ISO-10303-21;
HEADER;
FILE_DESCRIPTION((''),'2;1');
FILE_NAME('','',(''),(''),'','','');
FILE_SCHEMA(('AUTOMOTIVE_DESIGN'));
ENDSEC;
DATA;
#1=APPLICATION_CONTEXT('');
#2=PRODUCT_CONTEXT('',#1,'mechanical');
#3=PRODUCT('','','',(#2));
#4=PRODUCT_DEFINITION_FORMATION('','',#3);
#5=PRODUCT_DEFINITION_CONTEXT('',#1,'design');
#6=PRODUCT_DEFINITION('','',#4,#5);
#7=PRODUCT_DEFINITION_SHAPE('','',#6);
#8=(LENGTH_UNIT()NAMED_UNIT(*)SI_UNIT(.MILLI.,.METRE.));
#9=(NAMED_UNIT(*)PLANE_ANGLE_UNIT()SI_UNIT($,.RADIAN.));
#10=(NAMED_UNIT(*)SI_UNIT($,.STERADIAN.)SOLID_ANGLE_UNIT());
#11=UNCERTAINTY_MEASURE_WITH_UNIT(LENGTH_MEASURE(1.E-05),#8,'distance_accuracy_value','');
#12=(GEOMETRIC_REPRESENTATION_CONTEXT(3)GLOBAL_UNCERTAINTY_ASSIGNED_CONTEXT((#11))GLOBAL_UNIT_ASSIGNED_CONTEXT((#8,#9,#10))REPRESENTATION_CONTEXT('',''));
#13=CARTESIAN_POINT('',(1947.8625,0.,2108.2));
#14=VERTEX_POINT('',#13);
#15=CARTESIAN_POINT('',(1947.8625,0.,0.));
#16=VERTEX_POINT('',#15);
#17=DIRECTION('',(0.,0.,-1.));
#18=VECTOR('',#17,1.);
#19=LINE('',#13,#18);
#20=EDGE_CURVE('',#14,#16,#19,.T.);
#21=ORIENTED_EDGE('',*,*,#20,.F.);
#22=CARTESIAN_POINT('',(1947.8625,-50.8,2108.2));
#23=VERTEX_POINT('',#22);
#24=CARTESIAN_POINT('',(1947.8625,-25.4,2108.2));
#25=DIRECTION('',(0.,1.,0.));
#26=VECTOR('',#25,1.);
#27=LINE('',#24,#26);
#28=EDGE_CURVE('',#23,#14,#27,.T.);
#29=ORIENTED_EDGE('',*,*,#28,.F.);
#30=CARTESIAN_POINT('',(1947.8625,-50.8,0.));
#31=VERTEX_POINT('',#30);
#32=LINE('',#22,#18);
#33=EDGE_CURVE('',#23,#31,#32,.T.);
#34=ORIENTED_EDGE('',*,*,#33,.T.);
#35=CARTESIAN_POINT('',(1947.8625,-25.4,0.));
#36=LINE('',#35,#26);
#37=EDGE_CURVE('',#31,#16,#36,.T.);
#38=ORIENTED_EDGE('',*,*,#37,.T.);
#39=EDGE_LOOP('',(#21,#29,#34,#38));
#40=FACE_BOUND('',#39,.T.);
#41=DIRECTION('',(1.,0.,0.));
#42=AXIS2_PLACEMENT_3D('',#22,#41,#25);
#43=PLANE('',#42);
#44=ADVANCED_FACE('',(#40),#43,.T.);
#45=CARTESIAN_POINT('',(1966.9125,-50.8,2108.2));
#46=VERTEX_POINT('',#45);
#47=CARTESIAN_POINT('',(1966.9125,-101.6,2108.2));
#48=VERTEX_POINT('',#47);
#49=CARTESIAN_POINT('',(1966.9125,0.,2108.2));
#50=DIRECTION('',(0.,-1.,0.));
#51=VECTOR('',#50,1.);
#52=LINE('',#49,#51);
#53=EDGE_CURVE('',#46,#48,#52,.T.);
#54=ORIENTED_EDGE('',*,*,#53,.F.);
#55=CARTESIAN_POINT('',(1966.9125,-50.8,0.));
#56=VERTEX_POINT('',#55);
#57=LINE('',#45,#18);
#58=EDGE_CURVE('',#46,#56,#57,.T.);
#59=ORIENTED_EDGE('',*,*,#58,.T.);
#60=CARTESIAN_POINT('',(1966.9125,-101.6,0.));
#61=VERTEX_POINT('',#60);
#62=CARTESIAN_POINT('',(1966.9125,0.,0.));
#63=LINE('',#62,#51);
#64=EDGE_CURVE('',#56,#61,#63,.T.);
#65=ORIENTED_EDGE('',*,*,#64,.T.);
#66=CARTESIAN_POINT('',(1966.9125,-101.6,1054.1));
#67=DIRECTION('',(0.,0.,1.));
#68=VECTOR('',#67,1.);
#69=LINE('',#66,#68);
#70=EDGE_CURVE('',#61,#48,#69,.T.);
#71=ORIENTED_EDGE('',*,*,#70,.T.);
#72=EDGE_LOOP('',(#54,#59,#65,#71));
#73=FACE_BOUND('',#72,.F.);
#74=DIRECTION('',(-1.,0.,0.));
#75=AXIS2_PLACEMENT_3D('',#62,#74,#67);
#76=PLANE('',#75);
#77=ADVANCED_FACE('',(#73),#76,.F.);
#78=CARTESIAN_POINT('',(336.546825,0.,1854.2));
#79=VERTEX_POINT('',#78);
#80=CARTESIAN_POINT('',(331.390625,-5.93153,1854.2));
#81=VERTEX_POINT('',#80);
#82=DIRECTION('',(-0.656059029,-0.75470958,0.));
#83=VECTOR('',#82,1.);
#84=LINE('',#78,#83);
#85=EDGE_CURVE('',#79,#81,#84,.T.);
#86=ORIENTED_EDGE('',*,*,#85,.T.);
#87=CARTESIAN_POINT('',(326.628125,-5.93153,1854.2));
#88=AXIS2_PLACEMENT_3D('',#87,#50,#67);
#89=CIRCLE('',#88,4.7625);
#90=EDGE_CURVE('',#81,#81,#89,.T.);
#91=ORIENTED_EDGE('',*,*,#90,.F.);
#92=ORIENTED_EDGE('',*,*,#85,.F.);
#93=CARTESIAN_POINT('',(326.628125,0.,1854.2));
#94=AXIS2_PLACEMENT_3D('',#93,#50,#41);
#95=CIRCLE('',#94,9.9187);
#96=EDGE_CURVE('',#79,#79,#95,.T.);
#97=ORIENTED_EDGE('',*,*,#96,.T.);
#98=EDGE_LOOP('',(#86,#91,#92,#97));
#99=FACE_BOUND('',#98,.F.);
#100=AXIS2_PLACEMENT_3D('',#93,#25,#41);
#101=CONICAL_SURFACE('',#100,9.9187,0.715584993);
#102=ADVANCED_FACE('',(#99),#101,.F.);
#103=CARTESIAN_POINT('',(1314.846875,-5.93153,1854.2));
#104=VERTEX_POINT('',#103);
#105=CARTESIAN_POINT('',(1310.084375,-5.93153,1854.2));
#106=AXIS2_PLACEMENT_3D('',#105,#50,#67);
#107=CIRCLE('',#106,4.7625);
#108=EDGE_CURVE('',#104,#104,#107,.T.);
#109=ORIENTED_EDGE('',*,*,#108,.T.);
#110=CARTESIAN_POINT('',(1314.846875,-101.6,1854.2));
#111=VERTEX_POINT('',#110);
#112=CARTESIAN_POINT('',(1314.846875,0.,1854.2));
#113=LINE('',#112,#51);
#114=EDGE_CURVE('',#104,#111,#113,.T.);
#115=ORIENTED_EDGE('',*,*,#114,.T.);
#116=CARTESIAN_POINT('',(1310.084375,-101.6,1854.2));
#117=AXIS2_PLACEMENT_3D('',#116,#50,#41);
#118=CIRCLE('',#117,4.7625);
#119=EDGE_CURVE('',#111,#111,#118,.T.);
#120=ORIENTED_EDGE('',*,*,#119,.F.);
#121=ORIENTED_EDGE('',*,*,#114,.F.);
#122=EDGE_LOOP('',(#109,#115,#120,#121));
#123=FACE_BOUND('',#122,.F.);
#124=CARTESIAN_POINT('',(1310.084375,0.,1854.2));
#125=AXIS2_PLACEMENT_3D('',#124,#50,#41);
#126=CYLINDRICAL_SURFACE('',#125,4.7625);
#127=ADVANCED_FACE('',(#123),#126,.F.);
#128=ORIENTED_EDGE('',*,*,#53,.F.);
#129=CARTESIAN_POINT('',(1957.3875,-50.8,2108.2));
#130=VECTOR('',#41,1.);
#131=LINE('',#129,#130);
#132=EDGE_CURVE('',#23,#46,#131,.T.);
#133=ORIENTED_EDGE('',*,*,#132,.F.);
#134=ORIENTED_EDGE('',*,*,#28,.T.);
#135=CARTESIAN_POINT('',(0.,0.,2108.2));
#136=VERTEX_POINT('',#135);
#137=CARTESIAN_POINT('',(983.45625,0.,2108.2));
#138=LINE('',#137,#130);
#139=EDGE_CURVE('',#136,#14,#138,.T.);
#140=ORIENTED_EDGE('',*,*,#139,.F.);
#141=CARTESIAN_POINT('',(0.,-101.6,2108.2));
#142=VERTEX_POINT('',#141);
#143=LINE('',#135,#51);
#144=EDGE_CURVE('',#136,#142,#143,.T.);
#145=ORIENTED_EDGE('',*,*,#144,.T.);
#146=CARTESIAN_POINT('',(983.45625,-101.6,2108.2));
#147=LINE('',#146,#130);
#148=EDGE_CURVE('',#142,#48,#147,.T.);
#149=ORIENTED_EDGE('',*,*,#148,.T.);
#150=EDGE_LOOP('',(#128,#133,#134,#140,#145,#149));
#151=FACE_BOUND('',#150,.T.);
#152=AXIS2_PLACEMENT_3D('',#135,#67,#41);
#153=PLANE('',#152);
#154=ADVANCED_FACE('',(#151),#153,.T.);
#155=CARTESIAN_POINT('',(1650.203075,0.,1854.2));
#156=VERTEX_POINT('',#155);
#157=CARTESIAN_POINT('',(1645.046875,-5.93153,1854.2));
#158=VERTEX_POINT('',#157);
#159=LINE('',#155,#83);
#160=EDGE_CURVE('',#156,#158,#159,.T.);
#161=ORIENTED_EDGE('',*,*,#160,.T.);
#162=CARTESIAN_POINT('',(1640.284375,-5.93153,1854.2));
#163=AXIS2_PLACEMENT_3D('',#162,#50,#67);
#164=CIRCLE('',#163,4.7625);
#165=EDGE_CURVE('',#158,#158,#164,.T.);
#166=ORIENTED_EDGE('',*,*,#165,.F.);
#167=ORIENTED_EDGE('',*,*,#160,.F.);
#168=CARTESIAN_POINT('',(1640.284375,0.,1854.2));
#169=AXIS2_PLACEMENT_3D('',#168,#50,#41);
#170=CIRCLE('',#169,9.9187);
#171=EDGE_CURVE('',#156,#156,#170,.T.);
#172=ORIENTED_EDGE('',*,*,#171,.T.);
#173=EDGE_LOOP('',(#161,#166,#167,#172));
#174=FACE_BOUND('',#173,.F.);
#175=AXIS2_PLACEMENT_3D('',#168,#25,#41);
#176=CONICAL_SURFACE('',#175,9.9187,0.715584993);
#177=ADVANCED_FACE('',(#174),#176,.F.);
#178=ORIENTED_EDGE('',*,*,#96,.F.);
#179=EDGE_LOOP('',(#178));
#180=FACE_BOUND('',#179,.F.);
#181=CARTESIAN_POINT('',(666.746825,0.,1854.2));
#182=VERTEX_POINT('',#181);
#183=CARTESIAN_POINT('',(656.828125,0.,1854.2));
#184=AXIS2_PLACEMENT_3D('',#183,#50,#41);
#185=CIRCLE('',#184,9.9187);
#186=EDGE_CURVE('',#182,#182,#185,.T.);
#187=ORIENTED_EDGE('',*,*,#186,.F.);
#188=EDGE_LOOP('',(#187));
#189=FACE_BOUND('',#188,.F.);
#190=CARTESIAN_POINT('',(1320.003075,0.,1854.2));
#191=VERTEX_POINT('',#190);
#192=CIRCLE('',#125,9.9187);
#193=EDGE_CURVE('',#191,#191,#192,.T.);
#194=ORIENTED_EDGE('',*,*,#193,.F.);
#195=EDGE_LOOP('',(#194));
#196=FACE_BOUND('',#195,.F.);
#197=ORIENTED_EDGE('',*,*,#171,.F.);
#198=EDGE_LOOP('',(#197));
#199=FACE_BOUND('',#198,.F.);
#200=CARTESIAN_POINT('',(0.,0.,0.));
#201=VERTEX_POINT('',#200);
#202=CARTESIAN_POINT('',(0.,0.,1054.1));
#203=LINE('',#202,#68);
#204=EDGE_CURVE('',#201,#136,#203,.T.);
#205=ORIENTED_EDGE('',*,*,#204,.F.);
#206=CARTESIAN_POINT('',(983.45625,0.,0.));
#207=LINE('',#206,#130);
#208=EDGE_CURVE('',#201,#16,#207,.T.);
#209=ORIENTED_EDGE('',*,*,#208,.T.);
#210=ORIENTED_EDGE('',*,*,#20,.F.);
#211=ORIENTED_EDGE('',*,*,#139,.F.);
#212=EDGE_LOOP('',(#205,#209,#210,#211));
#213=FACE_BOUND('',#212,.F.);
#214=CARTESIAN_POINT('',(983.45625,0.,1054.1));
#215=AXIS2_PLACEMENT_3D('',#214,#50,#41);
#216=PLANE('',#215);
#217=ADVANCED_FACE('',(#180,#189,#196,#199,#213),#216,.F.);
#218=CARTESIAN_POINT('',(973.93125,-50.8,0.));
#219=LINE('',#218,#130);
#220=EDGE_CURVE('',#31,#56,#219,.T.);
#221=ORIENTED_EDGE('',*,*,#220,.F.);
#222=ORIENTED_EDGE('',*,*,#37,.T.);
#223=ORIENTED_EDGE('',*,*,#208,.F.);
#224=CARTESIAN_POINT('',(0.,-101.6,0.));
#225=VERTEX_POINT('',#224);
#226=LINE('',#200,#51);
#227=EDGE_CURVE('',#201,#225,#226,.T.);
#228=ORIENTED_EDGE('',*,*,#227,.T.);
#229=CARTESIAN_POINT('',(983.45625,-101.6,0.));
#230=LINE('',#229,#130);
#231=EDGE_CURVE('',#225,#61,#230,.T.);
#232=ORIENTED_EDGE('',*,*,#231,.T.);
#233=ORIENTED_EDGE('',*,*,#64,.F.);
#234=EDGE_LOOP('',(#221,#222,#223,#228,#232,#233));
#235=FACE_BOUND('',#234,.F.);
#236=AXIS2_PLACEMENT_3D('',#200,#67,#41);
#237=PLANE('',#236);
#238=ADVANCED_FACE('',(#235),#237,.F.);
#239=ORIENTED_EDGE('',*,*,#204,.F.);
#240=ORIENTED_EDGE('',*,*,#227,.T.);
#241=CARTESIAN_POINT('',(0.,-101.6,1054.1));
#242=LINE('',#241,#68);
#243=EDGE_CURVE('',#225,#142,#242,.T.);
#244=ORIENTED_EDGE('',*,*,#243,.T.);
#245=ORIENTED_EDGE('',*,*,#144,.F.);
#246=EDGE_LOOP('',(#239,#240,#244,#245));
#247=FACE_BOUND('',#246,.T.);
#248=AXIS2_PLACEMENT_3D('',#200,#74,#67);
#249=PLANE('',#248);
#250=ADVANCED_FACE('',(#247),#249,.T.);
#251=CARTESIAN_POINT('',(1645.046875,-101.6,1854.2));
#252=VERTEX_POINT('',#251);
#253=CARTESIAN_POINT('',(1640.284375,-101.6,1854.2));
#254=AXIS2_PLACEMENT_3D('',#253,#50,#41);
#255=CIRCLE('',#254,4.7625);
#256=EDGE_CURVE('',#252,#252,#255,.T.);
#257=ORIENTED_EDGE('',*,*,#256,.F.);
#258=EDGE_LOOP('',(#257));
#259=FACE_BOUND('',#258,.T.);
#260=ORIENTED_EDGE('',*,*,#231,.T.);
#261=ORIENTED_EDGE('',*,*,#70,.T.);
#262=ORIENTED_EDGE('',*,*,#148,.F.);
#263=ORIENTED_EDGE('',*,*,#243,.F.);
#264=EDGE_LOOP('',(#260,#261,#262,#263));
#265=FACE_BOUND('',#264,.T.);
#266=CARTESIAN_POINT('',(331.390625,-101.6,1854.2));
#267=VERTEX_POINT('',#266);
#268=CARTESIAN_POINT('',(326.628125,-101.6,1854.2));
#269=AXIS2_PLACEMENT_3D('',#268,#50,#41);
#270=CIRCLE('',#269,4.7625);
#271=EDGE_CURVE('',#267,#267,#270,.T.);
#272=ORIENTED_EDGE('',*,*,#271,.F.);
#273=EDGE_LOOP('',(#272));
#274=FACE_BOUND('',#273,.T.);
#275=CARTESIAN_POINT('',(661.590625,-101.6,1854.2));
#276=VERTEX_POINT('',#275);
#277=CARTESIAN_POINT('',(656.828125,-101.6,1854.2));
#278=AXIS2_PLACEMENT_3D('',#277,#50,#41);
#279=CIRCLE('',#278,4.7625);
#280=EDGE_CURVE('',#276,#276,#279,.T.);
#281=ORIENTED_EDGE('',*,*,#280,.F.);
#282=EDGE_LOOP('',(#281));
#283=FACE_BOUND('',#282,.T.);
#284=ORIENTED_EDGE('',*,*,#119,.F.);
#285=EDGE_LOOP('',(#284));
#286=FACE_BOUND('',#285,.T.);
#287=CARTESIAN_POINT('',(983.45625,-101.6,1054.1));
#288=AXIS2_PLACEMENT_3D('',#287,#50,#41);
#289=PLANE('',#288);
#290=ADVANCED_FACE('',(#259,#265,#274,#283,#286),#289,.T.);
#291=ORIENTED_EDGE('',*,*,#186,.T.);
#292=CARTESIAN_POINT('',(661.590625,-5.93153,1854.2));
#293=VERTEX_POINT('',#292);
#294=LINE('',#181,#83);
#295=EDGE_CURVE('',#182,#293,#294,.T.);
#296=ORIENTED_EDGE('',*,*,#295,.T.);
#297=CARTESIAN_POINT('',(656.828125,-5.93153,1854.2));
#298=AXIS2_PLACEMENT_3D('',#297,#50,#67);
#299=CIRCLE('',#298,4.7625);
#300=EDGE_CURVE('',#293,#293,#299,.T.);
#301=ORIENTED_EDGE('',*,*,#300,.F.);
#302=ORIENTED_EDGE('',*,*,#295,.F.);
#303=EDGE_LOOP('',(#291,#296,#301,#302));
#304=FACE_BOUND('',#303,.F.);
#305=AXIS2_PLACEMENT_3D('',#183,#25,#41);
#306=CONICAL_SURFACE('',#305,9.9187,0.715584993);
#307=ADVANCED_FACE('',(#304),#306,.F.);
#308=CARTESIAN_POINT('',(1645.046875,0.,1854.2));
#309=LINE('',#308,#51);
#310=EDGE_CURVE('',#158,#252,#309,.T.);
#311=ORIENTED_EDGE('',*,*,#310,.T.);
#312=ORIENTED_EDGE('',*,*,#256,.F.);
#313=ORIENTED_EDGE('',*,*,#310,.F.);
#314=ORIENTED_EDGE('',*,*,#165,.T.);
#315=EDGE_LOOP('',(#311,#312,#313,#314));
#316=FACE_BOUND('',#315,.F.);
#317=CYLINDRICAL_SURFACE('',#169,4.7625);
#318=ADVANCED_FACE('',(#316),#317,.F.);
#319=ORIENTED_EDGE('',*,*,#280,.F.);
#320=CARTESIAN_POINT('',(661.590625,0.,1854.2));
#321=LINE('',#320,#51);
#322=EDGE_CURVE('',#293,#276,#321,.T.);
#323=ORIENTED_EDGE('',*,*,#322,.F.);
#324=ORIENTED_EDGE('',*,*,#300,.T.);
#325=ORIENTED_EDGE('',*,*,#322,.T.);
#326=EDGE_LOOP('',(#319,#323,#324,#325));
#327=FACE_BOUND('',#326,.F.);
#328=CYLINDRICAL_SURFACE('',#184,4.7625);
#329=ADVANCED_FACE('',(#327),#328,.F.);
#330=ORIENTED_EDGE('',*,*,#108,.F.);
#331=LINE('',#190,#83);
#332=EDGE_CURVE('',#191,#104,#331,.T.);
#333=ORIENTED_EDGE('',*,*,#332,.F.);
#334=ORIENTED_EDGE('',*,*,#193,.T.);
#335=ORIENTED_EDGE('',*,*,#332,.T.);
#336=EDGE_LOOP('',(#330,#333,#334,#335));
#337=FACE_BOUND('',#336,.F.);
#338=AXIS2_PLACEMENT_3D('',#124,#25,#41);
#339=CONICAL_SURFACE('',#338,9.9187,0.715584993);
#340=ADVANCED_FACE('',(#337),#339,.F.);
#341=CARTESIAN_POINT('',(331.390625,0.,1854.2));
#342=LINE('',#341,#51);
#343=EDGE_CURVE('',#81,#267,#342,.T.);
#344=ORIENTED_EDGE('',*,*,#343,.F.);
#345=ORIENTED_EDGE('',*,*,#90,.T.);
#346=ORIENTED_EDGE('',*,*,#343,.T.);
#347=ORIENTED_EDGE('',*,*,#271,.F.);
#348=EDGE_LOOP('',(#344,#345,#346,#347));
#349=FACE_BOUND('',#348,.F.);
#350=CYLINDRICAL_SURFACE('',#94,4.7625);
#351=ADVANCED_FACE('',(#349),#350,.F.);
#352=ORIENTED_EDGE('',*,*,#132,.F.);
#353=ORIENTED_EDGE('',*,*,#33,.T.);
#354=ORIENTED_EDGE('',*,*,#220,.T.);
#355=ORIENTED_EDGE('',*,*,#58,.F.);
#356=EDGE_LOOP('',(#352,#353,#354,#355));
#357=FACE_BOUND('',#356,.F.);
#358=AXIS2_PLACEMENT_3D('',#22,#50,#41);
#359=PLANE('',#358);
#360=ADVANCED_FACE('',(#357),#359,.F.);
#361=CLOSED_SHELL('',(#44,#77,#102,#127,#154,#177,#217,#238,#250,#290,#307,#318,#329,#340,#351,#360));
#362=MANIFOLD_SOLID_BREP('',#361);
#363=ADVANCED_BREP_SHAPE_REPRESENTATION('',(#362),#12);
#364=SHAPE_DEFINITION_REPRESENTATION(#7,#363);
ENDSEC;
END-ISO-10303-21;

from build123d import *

# Parameters (mm, degrees)
F0_W           = 1966.9125
F0_H           = 2108.2
F1_DEPTH       = 101.6
F2_W           = 19.05
F2_H           = 50.8
F3_DEPTH       = 2108.201
F6_D           = 9.525
F6_CSINK_D     = 19.8374
F6_CSINK_ANGLE = 82


# Not quite as in the source:
# - a feature names something its author has since deleted; it is built from what else it names


with BuildPart() as f1:
    # F0 (on Front) → F1 (new body)
    with BuildSketch(Plane.XZ):
        with Locations((983.45625, 1054.1)):
            Rectangle(F0_W, F0_H)
    extrude(amount=F1_DEPTH)

    # F2 (on face) → F3 (cut, through all)
    with BuildSketch(Plane.XY.offset(2108.2)):
        with Locations((1957.3875, -25.4)):
            Rectangle(F2_W, F2_H)
    extrude(amount=-F3_DEPTH, mode=Mode.SUBTRACT)

    # F6 (through all)
    with Locations(Plane(origin=(0, 0, 0), x_dir=(-1, 0, 0), z_dir=(0, 1, 0))):
        with Locations((-1640.284375, 1854.2), (-1310.084375, 1854.2), (-656.828125, 1854.2), (-326.628125, 1854.2)):
            CounterSinkHole(F6_D / 2, F6_CSINK_D / 2, counter_sink_angle=F6_CSINK_ANGLE)


solid = f1.part
